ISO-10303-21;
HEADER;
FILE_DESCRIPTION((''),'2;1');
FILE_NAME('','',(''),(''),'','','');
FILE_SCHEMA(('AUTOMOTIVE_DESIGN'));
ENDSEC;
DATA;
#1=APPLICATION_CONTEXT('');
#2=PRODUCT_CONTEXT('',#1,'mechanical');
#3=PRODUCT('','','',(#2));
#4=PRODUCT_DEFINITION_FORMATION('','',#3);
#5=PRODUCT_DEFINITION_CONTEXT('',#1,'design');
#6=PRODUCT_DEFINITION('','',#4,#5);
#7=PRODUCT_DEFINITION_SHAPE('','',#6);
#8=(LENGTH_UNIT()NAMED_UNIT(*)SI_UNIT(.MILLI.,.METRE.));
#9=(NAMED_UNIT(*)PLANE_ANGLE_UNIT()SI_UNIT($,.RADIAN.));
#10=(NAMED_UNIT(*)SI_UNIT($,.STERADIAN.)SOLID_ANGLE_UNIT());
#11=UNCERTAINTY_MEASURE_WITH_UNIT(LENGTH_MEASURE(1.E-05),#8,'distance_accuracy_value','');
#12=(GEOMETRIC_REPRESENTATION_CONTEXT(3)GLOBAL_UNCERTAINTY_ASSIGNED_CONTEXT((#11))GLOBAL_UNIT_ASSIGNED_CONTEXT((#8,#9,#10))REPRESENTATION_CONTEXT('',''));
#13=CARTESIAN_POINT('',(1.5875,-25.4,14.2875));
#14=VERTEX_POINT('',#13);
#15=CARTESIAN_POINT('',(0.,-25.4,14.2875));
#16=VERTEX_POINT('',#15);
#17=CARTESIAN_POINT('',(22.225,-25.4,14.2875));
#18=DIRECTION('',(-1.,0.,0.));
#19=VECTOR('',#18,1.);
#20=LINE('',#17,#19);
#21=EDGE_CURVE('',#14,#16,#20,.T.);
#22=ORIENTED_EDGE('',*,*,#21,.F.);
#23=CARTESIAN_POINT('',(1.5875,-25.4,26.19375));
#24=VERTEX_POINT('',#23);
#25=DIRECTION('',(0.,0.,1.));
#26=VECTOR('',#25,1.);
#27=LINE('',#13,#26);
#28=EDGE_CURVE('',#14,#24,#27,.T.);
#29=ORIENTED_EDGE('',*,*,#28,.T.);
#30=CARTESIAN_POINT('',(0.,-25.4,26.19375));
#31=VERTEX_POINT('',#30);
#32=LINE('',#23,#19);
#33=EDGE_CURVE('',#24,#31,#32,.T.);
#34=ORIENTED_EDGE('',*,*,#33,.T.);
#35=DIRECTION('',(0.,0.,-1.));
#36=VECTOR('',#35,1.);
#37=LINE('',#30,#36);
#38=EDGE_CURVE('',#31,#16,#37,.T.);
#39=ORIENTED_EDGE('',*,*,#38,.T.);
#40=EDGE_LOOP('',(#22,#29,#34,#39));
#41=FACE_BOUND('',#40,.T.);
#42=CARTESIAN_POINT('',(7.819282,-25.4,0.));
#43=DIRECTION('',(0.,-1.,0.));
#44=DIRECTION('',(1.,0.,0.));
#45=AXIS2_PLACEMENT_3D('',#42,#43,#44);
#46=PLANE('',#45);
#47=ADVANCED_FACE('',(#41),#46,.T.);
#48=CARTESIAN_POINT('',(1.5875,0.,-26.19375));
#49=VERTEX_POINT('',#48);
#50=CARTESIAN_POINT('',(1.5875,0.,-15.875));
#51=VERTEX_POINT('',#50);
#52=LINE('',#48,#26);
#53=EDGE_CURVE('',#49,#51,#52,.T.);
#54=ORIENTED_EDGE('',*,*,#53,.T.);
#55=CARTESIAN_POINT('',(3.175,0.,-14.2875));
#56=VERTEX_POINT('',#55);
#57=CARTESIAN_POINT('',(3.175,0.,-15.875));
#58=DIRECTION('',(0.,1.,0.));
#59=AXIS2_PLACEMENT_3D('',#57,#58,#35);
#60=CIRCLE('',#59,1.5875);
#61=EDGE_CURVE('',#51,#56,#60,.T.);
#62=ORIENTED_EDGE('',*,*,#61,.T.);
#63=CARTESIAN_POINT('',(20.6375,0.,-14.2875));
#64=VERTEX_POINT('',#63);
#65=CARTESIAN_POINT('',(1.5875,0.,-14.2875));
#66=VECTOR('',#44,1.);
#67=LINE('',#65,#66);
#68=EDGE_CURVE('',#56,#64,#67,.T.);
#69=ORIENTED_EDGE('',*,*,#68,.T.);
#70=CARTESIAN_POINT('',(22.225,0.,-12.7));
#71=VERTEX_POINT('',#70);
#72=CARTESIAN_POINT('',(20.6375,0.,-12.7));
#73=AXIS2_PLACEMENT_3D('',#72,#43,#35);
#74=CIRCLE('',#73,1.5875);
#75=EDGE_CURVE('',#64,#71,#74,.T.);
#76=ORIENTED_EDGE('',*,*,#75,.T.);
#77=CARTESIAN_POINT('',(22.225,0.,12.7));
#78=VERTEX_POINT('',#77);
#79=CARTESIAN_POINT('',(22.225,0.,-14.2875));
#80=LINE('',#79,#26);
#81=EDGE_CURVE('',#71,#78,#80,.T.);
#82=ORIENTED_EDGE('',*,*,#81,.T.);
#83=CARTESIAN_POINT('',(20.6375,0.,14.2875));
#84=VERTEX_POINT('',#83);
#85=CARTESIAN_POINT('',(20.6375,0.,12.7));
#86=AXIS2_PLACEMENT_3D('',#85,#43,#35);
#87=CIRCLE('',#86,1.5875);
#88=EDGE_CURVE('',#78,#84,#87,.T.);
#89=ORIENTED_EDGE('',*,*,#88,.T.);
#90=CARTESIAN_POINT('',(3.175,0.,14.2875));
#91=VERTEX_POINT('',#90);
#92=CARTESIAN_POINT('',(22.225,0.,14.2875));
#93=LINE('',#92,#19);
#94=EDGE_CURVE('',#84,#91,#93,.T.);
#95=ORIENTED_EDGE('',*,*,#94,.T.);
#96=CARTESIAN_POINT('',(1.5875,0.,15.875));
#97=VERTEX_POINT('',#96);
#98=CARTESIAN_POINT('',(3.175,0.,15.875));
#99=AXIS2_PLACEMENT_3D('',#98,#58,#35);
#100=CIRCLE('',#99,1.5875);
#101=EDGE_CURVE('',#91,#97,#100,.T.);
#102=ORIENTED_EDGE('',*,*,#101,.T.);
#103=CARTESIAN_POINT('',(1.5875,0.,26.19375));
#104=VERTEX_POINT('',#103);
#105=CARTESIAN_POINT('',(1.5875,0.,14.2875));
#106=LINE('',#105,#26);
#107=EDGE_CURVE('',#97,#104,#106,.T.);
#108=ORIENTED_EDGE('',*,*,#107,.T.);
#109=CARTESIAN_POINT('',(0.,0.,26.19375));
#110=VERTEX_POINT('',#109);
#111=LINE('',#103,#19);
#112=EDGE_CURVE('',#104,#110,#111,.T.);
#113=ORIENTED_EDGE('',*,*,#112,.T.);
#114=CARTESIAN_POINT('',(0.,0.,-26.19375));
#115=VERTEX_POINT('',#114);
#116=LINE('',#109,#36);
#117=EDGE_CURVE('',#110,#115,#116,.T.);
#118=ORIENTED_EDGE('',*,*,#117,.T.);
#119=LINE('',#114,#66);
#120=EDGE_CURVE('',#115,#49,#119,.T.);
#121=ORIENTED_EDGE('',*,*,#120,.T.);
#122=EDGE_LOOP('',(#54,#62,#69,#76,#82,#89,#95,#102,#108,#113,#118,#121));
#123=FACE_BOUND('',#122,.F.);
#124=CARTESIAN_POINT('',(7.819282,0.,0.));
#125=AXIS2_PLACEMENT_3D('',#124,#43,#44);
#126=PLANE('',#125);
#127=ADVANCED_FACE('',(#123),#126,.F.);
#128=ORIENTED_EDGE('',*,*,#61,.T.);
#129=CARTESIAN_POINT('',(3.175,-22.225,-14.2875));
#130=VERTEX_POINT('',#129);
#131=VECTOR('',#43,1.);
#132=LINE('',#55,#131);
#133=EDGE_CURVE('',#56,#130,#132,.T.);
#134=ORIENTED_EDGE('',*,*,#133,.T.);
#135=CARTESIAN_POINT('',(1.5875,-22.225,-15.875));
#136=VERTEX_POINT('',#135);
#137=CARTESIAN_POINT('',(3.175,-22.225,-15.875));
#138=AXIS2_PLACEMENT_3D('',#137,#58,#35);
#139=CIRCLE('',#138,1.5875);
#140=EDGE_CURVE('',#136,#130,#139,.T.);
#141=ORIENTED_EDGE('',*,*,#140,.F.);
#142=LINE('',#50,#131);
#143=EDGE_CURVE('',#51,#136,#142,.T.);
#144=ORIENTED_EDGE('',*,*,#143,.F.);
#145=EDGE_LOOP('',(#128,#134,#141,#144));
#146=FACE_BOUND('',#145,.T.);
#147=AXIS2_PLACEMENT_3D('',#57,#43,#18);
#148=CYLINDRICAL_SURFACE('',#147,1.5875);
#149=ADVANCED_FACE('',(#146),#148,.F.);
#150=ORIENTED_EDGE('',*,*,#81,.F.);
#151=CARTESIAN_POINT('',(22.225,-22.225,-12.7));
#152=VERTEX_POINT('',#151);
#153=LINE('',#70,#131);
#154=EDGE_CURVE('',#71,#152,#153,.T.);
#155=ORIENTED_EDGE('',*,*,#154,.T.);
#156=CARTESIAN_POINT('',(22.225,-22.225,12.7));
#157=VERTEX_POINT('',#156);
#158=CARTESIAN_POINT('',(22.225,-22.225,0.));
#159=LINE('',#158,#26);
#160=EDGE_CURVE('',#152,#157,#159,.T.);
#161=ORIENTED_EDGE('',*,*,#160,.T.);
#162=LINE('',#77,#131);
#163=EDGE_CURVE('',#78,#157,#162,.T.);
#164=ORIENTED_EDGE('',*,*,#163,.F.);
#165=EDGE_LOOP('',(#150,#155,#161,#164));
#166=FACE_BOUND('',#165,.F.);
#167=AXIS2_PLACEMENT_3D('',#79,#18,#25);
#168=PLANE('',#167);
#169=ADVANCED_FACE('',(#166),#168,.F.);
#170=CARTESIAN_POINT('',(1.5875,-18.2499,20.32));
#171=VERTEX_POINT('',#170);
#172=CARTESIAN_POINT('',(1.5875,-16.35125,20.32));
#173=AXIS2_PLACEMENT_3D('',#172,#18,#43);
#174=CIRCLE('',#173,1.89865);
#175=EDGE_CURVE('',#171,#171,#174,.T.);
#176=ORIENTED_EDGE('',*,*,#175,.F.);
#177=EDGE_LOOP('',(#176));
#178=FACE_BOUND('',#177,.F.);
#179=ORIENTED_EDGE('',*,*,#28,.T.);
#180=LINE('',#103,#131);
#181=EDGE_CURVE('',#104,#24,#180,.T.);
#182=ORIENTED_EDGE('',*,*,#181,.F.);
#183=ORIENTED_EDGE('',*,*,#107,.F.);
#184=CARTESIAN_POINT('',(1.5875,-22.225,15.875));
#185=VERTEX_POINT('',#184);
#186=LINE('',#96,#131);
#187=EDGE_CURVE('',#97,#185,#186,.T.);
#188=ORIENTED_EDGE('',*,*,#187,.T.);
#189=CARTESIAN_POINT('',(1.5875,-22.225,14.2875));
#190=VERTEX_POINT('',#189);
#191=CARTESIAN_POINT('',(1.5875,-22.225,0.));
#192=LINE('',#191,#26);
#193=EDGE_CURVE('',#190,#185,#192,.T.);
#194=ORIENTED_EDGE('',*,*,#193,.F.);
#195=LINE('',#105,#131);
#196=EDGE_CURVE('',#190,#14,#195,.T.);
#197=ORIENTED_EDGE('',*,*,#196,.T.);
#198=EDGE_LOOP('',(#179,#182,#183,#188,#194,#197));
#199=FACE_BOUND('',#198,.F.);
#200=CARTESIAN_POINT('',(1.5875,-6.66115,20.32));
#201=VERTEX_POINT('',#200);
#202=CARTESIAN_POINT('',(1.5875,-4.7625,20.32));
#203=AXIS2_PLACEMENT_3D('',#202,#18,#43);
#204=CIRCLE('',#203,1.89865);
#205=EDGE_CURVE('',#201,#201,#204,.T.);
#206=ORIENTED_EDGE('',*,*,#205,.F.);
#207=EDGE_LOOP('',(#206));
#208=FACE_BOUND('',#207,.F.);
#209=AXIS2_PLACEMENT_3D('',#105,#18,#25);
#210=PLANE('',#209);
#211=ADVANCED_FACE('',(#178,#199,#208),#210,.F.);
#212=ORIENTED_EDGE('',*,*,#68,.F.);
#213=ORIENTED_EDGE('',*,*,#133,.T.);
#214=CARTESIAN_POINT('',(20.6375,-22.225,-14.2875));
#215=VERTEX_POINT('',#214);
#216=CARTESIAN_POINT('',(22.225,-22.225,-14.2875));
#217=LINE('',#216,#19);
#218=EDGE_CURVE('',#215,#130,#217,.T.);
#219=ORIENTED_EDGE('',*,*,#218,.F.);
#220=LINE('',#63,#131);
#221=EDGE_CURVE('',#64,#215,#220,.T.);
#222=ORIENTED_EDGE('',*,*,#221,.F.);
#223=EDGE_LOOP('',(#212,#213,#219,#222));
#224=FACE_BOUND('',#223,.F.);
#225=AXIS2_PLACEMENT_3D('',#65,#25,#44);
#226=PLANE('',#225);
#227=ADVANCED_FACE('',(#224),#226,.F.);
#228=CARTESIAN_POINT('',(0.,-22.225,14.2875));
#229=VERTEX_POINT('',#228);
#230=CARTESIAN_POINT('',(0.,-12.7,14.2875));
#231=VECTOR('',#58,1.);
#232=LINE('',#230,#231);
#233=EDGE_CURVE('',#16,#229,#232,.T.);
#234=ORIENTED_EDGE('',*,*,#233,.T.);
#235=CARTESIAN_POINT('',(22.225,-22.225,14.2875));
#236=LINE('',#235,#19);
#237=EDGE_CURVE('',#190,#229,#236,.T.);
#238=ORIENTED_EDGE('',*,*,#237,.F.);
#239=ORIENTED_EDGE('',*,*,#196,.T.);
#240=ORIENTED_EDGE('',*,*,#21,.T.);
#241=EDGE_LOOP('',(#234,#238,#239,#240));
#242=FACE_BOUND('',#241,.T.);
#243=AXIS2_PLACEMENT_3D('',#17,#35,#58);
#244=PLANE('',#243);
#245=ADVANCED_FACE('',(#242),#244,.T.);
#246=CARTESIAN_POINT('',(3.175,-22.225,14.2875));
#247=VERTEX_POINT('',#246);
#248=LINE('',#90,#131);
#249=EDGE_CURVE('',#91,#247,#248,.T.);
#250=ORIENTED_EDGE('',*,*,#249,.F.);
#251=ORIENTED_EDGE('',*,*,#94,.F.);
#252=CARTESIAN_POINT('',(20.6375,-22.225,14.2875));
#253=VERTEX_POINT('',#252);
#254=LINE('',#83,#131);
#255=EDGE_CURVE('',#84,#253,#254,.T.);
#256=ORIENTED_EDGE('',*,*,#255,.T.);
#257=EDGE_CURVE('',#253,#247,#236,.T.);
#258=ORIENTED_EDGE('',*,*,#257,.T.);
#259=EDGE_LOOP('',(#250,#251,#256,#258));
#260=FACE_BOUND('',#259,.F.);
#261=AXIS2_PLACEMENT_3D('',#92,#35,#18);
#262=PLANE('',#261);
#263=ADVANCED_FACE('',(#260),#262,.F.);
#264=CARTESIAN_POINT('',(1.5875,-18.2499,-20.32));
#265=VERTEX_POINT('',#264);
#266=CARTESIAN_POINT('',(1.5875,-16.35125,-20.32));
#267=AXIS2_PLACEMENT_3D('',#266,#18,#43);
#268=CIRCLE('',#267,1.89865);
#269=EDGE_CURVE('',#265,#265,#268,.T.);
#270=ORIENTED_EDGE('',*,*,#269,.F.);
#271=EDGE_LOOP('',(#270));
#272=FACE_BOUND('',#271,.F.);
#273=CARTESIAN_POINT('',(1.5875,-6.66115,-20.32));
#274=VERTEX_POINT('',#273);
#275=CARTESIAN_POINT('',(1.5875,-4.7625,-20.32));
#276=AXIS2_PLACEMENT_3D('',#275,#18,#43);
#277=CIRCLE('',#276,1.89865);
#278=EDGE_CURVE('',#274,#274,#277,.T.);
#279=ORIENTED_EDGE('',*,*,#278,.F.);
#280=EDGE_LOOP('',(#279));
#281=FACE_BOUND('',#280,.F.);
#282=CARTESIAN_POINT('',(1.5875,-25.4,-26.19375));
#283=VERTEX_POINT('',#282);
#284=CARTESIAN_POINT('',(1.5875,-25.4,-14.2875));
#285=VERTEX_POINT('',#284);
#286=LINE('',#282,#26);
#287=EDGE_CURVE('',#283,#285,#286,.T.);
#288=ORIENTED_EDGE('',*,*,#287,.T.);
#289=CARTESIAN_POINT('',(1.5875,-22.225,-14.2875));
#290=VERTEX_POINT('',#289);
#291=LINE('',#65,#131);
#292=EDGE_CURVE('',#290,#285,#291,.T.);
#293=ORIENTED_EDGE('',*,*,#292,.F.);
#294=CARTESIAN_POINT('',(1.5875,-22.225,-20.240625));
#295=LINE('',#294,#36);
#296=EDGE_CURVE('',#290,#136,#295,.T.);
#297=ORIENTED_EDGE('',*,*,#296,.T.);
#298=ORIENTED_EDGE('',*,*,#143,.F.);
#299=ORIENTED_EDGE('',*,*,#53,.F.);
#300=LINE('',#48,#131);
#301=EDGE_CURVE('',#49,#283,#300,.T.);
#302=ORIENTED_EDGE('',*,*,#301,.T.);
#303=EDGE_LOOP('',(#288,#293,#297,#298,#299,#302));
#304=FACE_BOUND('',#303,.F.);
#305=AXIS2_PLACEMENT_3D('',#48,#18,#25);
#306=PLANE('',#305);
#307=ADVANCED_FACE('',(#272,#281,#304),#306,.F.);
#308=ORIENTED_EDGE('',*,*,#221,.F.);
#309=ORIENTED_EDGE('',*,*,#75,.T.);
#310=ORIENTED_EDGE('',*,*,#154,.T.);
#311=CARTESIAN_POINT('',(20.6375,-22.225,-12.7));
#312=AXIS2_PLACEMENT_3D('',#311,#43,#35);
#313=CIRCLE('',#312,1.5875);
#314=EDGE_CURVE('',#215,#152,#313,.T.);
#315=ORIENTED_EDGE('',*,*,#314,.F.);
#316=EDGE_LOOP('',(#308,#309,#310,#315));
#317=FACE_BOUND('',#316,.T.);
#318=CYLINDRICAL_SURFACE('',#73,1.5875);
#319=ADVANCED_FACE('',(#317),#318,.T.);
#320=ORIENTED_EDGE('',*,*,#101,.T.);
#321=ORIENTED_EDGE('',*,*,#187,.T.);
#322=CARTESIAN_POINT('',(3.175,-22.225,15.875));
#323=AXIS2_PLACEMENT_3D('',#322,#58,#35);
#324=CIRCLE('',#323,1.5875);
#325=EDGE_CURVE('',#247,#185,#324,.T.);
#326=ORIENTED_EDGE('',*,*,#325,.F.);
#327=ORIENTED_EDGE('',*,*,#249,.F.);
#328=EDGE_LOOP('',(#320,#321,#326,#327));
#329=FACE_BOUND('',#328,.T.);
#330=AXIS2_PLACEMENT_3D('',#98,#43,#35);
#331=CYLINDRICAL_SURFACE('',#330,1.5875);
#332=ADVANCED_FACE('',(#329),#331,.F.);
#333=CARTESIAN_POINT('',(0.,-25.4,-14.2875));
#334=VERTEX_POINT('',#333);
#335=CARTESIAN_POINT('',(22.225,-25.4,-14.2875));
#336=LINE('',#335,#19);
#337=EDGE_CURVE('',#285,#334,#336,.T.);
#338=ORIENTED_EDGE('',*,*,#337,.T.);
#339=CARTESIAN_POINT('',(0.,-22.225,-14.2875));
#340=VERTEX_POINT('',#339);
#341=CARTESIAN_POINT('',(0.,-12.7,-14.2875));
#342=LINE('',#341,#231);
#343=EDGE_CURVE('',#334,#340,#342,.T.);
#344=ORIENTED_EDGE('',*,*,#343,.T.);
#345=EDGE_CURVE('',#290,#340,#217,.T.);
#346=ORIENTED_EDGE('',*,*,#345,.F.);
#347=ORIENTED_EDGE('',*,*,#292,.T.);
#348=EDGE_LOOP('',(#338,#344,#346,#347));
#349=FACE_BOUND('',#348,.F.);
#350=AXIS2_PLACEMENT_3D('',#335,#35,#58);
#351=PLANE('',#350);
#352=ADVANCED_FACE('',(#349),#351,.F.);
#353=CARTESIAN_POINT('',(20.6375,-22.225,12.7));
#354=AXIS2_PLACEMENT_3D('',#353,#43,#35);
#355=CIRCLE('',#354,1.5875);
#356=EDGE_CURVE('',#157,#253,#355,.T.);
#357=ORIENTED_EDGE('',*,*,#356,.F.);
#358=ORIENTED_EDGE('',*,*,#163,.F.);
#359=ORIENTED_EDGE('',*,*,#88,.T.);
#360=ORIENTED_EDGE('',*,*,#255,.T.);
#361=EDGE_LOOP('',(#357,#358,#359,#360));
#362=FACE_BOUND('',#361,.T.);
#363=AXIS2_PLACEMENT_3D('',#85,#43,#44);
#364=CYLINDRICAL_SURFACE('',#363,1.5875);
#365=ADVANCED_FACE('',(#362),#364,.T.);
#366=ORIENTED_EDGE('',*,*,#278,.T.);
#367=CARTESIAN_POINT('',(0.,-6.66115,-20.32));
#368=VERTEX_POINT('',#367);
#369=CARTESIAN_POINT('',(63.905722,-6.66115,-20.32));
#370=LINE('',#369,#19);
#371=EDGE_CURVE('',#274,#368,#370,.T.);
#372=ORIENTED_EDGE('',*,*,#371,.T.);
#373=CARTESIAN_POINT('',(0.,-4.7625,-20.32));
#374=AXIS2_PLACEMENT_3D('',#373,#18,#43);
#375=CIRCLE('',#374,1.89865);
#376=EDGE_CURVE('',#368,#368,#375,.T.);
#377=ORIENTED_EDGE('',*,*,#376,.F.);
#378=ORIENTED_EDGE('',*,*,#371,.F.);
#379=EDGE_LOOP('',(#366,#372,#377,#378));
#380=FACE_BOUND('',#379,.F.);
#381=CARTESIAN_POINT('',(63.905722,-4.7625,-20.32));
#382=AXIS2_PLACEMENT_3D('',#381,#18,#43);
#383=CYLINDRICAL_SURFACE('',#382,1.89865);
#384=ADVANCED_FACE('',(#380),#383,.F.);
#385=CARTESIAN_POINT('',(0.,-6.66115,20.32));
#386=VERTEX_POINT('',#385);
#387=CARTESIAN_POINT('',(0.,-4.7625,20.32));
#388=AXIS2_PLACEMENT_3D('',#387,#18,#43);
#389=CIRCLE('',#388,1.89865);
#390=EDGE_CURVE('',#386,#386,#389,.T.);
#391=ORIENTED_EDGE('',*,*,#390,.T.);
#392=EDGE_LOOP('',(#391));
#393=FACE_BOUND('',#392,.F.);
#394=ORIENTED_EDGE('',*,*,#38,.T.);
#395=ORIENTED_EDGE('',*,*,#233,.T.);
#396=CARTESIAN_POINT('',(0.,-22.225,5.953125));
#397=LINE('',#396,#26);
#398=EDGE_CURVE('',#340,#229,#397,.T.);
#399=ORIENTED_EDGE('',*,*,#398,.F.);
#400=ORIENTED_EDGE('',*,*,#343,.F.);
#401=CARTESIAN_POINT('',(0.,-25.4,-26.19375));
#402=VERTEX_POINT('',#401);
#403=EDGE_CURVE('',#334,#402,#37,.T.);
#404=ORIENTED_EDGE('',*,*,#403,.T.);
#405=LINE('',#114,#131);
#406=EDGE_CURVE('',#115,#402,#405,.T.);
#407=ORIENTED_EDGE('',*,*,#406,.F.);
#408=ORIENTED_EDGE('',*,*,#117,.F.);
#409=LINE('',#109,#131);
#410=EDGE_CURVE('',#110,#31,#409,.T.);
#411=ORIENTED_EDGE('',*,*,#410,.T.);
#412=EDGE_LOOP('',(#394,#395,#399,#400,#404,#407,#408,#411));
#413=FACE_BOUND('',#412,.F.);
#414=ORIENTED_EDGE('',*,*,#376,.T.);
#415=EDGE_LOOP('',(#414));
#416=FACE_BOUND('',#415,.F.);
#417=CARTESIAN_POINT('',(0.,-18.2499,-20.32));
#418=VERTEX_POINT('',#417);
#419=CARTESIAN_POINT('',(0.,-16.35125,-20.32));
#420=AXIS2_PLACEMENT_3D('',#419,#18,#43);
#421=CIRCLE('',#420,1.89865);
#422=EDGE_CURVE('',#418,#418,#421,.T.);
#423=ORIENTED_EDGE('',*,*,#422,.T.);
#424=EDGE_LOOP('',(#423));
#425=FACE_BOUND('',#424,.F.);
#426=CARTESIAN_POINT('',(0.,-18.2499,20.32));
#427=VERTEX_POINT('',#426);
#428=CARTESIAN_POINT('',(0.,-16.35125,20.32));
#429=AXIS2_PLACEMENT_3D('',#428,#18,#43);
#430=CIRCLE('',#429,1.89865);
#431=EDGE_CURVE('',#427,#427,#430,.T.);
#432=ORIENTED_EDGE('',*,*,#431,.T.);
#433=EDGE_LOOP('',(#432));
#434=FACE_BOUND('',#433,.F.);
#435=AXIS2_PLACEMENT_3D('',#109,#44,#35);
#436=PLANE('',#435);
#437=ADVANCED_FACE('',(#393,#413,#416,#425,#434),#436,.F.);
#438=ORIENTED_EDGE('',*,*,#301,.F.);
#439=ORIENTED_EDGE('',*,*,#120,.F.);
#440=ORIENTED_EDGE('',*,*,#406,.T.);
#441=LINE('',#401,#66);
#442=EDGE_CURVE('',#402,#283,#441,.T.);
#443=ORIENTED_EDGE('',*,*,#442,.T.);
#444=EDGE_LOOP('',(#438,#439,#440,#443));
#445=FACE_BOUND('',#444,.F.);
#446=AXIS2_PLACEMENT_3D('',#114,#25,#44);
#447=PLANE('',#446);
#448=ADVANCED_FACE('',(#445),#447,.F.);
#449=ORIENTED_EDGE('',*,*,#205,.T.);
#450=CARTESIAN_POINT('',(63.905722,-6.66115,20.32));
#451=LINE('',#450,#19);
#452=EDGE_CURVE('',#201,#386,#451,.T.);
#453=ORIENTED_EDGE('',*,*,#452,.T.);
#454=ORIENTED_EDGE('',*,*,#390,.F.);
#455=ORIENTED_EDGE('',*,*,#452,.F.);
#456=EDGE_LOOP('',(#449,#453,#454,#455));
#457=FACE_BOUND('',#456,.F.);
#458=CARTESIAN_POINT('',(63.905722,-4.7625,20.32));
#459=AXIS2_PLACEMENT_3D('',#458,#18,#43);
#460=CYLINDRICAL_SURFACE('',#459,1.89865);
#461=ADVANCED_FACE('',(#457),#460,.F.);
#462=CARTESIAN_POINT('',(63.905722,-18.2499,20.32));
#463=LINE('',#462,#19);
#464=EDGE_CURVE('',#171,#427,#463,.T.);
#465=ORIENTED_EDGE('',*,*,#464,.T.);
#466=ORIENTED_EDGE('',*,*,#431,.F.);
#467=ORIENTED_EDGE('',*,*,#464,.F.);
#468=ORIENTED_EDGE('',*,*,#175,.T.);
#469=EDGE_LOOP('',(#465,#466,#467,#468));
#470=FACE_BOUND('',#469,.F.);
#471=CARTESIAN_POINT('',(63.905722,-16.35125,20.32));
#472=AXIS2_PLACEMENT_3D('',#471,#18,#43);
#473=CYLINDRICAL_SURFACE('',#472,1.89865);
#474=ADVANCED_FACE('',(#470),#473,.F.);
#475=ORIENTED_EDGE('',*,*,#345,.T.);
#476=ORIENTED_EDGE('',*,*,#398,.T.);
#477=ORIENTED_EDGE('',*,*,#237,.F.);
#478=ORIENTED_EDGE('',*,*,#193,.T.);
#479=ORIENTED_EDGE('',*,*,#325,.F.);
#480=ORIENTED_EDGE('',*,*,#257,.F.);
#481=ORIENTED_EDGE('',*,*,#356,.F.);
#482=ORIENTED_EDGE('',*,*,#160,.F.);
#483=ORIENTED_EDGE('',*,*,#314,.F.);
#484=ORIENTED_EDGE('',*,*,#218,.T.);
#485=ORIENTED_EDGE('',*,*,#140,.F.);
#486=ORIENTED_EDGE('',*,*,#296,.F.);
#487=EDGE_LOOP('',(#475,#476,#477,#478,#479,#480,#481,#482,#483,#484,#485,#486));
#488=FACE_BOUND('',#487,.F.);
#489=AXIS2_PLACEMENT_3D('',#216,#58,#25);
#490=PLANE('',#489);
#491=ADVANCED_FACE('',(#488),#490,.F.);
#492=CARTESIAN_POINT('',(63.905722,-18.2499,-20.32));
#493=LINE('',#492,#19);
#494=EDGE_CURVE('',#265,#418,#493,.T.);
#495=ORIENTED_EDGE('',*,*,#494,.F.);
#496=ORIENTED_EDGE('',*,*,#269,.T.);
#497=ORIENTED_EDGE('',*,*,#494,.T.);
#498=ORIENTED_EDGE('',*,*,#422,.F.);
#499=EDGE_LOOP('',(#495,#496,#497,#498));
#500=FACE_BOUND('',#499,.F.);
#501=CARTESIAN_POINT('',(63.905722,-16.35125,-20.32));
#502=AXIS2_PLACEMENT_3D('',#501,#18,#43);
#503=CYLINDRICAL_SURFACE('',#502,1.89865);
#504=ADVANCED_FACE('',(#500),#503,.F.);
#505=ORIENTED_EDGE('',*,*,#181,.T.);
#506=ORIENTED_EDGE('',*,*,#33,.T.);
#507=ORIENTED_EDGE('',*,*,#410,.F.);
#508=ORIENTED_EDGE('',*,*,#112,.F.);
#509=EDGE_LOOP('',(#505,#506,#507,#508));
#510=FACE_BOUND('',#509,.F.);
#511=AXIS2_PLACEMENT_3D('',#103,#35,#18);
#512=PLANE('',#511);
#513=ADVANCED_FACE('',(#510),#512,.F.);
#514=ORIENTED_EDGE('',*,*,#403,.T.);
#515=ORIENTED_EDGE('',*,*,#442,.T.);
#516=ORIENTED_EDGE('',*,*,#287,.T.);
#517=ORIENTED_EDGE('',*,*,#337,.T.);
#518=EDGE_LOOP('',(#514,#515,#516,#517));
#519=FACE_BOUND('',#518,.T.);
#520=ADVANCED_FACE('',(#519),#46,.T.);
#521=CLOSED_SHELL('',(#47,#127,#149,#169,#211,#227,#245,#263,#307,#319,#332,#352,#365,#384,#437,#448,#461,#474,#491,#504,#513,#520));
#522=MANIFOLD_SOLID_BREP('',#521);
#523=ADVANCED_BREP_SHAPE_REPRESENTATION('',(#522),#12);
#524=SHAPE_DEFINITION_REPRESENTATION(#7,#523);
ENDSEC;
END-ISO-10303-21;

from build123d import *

# Parameters (mm, degrees)
F1_DEPTH = 25.4
F3_D     = 3.7973
F4_W     = 3.175
F4_H     = 28.575
F5_DEPTH = 22.226
F6_R     = 1.5875


with BuildPart() as f1:
    # F0 (on Front) → F1 (new body)
    with BuildSketch(Plane.XZ):
        Polygon((0, 26.19375), (0, 0), (0, -26.19375), (1.5875, -26.19375), (1.5875, -14.2875), (22.225, -14.2875), (22.225, 0), (22.225, 14.2875), (1.5875, 14.2875), (1.5875, 26.19375), align=None)
    extrude(amount=F1_DEPTH)

    # F3 (through all)
    with Locations(Plane.YZ.offset(1.5875)):
        with Locations((-16.35125, 20.32), (-4.7625, 20.32), (-16.35125, -20.32), (-4.7625, -20.32)):
            Hole(F3_D / 2)

    # F4 (on face) → F5 (cut, through all)
    with BuildSketch(Plane.YZ.offset(22.225)):
        with Locations((-23.8125, 0)):
            Rectangle(F4_W, F4_H)
    extrude(amount=-F5_DEPTH, mode=Mode.SUBTRACT)

    # F6
    f6_edges = [f1.edges().sort_by_distance(p)[0] for p in [
        (22.225, -11.1125, 14.2875),
        (22.225, -11.1125, -14.2875),
        (1.5875, -11.1125, 14.2875),
        (1.5875, -11.1125, -14.2875),
    ]]
    fillet(f6_edges, radius=F6_R)


solid = f1.part
